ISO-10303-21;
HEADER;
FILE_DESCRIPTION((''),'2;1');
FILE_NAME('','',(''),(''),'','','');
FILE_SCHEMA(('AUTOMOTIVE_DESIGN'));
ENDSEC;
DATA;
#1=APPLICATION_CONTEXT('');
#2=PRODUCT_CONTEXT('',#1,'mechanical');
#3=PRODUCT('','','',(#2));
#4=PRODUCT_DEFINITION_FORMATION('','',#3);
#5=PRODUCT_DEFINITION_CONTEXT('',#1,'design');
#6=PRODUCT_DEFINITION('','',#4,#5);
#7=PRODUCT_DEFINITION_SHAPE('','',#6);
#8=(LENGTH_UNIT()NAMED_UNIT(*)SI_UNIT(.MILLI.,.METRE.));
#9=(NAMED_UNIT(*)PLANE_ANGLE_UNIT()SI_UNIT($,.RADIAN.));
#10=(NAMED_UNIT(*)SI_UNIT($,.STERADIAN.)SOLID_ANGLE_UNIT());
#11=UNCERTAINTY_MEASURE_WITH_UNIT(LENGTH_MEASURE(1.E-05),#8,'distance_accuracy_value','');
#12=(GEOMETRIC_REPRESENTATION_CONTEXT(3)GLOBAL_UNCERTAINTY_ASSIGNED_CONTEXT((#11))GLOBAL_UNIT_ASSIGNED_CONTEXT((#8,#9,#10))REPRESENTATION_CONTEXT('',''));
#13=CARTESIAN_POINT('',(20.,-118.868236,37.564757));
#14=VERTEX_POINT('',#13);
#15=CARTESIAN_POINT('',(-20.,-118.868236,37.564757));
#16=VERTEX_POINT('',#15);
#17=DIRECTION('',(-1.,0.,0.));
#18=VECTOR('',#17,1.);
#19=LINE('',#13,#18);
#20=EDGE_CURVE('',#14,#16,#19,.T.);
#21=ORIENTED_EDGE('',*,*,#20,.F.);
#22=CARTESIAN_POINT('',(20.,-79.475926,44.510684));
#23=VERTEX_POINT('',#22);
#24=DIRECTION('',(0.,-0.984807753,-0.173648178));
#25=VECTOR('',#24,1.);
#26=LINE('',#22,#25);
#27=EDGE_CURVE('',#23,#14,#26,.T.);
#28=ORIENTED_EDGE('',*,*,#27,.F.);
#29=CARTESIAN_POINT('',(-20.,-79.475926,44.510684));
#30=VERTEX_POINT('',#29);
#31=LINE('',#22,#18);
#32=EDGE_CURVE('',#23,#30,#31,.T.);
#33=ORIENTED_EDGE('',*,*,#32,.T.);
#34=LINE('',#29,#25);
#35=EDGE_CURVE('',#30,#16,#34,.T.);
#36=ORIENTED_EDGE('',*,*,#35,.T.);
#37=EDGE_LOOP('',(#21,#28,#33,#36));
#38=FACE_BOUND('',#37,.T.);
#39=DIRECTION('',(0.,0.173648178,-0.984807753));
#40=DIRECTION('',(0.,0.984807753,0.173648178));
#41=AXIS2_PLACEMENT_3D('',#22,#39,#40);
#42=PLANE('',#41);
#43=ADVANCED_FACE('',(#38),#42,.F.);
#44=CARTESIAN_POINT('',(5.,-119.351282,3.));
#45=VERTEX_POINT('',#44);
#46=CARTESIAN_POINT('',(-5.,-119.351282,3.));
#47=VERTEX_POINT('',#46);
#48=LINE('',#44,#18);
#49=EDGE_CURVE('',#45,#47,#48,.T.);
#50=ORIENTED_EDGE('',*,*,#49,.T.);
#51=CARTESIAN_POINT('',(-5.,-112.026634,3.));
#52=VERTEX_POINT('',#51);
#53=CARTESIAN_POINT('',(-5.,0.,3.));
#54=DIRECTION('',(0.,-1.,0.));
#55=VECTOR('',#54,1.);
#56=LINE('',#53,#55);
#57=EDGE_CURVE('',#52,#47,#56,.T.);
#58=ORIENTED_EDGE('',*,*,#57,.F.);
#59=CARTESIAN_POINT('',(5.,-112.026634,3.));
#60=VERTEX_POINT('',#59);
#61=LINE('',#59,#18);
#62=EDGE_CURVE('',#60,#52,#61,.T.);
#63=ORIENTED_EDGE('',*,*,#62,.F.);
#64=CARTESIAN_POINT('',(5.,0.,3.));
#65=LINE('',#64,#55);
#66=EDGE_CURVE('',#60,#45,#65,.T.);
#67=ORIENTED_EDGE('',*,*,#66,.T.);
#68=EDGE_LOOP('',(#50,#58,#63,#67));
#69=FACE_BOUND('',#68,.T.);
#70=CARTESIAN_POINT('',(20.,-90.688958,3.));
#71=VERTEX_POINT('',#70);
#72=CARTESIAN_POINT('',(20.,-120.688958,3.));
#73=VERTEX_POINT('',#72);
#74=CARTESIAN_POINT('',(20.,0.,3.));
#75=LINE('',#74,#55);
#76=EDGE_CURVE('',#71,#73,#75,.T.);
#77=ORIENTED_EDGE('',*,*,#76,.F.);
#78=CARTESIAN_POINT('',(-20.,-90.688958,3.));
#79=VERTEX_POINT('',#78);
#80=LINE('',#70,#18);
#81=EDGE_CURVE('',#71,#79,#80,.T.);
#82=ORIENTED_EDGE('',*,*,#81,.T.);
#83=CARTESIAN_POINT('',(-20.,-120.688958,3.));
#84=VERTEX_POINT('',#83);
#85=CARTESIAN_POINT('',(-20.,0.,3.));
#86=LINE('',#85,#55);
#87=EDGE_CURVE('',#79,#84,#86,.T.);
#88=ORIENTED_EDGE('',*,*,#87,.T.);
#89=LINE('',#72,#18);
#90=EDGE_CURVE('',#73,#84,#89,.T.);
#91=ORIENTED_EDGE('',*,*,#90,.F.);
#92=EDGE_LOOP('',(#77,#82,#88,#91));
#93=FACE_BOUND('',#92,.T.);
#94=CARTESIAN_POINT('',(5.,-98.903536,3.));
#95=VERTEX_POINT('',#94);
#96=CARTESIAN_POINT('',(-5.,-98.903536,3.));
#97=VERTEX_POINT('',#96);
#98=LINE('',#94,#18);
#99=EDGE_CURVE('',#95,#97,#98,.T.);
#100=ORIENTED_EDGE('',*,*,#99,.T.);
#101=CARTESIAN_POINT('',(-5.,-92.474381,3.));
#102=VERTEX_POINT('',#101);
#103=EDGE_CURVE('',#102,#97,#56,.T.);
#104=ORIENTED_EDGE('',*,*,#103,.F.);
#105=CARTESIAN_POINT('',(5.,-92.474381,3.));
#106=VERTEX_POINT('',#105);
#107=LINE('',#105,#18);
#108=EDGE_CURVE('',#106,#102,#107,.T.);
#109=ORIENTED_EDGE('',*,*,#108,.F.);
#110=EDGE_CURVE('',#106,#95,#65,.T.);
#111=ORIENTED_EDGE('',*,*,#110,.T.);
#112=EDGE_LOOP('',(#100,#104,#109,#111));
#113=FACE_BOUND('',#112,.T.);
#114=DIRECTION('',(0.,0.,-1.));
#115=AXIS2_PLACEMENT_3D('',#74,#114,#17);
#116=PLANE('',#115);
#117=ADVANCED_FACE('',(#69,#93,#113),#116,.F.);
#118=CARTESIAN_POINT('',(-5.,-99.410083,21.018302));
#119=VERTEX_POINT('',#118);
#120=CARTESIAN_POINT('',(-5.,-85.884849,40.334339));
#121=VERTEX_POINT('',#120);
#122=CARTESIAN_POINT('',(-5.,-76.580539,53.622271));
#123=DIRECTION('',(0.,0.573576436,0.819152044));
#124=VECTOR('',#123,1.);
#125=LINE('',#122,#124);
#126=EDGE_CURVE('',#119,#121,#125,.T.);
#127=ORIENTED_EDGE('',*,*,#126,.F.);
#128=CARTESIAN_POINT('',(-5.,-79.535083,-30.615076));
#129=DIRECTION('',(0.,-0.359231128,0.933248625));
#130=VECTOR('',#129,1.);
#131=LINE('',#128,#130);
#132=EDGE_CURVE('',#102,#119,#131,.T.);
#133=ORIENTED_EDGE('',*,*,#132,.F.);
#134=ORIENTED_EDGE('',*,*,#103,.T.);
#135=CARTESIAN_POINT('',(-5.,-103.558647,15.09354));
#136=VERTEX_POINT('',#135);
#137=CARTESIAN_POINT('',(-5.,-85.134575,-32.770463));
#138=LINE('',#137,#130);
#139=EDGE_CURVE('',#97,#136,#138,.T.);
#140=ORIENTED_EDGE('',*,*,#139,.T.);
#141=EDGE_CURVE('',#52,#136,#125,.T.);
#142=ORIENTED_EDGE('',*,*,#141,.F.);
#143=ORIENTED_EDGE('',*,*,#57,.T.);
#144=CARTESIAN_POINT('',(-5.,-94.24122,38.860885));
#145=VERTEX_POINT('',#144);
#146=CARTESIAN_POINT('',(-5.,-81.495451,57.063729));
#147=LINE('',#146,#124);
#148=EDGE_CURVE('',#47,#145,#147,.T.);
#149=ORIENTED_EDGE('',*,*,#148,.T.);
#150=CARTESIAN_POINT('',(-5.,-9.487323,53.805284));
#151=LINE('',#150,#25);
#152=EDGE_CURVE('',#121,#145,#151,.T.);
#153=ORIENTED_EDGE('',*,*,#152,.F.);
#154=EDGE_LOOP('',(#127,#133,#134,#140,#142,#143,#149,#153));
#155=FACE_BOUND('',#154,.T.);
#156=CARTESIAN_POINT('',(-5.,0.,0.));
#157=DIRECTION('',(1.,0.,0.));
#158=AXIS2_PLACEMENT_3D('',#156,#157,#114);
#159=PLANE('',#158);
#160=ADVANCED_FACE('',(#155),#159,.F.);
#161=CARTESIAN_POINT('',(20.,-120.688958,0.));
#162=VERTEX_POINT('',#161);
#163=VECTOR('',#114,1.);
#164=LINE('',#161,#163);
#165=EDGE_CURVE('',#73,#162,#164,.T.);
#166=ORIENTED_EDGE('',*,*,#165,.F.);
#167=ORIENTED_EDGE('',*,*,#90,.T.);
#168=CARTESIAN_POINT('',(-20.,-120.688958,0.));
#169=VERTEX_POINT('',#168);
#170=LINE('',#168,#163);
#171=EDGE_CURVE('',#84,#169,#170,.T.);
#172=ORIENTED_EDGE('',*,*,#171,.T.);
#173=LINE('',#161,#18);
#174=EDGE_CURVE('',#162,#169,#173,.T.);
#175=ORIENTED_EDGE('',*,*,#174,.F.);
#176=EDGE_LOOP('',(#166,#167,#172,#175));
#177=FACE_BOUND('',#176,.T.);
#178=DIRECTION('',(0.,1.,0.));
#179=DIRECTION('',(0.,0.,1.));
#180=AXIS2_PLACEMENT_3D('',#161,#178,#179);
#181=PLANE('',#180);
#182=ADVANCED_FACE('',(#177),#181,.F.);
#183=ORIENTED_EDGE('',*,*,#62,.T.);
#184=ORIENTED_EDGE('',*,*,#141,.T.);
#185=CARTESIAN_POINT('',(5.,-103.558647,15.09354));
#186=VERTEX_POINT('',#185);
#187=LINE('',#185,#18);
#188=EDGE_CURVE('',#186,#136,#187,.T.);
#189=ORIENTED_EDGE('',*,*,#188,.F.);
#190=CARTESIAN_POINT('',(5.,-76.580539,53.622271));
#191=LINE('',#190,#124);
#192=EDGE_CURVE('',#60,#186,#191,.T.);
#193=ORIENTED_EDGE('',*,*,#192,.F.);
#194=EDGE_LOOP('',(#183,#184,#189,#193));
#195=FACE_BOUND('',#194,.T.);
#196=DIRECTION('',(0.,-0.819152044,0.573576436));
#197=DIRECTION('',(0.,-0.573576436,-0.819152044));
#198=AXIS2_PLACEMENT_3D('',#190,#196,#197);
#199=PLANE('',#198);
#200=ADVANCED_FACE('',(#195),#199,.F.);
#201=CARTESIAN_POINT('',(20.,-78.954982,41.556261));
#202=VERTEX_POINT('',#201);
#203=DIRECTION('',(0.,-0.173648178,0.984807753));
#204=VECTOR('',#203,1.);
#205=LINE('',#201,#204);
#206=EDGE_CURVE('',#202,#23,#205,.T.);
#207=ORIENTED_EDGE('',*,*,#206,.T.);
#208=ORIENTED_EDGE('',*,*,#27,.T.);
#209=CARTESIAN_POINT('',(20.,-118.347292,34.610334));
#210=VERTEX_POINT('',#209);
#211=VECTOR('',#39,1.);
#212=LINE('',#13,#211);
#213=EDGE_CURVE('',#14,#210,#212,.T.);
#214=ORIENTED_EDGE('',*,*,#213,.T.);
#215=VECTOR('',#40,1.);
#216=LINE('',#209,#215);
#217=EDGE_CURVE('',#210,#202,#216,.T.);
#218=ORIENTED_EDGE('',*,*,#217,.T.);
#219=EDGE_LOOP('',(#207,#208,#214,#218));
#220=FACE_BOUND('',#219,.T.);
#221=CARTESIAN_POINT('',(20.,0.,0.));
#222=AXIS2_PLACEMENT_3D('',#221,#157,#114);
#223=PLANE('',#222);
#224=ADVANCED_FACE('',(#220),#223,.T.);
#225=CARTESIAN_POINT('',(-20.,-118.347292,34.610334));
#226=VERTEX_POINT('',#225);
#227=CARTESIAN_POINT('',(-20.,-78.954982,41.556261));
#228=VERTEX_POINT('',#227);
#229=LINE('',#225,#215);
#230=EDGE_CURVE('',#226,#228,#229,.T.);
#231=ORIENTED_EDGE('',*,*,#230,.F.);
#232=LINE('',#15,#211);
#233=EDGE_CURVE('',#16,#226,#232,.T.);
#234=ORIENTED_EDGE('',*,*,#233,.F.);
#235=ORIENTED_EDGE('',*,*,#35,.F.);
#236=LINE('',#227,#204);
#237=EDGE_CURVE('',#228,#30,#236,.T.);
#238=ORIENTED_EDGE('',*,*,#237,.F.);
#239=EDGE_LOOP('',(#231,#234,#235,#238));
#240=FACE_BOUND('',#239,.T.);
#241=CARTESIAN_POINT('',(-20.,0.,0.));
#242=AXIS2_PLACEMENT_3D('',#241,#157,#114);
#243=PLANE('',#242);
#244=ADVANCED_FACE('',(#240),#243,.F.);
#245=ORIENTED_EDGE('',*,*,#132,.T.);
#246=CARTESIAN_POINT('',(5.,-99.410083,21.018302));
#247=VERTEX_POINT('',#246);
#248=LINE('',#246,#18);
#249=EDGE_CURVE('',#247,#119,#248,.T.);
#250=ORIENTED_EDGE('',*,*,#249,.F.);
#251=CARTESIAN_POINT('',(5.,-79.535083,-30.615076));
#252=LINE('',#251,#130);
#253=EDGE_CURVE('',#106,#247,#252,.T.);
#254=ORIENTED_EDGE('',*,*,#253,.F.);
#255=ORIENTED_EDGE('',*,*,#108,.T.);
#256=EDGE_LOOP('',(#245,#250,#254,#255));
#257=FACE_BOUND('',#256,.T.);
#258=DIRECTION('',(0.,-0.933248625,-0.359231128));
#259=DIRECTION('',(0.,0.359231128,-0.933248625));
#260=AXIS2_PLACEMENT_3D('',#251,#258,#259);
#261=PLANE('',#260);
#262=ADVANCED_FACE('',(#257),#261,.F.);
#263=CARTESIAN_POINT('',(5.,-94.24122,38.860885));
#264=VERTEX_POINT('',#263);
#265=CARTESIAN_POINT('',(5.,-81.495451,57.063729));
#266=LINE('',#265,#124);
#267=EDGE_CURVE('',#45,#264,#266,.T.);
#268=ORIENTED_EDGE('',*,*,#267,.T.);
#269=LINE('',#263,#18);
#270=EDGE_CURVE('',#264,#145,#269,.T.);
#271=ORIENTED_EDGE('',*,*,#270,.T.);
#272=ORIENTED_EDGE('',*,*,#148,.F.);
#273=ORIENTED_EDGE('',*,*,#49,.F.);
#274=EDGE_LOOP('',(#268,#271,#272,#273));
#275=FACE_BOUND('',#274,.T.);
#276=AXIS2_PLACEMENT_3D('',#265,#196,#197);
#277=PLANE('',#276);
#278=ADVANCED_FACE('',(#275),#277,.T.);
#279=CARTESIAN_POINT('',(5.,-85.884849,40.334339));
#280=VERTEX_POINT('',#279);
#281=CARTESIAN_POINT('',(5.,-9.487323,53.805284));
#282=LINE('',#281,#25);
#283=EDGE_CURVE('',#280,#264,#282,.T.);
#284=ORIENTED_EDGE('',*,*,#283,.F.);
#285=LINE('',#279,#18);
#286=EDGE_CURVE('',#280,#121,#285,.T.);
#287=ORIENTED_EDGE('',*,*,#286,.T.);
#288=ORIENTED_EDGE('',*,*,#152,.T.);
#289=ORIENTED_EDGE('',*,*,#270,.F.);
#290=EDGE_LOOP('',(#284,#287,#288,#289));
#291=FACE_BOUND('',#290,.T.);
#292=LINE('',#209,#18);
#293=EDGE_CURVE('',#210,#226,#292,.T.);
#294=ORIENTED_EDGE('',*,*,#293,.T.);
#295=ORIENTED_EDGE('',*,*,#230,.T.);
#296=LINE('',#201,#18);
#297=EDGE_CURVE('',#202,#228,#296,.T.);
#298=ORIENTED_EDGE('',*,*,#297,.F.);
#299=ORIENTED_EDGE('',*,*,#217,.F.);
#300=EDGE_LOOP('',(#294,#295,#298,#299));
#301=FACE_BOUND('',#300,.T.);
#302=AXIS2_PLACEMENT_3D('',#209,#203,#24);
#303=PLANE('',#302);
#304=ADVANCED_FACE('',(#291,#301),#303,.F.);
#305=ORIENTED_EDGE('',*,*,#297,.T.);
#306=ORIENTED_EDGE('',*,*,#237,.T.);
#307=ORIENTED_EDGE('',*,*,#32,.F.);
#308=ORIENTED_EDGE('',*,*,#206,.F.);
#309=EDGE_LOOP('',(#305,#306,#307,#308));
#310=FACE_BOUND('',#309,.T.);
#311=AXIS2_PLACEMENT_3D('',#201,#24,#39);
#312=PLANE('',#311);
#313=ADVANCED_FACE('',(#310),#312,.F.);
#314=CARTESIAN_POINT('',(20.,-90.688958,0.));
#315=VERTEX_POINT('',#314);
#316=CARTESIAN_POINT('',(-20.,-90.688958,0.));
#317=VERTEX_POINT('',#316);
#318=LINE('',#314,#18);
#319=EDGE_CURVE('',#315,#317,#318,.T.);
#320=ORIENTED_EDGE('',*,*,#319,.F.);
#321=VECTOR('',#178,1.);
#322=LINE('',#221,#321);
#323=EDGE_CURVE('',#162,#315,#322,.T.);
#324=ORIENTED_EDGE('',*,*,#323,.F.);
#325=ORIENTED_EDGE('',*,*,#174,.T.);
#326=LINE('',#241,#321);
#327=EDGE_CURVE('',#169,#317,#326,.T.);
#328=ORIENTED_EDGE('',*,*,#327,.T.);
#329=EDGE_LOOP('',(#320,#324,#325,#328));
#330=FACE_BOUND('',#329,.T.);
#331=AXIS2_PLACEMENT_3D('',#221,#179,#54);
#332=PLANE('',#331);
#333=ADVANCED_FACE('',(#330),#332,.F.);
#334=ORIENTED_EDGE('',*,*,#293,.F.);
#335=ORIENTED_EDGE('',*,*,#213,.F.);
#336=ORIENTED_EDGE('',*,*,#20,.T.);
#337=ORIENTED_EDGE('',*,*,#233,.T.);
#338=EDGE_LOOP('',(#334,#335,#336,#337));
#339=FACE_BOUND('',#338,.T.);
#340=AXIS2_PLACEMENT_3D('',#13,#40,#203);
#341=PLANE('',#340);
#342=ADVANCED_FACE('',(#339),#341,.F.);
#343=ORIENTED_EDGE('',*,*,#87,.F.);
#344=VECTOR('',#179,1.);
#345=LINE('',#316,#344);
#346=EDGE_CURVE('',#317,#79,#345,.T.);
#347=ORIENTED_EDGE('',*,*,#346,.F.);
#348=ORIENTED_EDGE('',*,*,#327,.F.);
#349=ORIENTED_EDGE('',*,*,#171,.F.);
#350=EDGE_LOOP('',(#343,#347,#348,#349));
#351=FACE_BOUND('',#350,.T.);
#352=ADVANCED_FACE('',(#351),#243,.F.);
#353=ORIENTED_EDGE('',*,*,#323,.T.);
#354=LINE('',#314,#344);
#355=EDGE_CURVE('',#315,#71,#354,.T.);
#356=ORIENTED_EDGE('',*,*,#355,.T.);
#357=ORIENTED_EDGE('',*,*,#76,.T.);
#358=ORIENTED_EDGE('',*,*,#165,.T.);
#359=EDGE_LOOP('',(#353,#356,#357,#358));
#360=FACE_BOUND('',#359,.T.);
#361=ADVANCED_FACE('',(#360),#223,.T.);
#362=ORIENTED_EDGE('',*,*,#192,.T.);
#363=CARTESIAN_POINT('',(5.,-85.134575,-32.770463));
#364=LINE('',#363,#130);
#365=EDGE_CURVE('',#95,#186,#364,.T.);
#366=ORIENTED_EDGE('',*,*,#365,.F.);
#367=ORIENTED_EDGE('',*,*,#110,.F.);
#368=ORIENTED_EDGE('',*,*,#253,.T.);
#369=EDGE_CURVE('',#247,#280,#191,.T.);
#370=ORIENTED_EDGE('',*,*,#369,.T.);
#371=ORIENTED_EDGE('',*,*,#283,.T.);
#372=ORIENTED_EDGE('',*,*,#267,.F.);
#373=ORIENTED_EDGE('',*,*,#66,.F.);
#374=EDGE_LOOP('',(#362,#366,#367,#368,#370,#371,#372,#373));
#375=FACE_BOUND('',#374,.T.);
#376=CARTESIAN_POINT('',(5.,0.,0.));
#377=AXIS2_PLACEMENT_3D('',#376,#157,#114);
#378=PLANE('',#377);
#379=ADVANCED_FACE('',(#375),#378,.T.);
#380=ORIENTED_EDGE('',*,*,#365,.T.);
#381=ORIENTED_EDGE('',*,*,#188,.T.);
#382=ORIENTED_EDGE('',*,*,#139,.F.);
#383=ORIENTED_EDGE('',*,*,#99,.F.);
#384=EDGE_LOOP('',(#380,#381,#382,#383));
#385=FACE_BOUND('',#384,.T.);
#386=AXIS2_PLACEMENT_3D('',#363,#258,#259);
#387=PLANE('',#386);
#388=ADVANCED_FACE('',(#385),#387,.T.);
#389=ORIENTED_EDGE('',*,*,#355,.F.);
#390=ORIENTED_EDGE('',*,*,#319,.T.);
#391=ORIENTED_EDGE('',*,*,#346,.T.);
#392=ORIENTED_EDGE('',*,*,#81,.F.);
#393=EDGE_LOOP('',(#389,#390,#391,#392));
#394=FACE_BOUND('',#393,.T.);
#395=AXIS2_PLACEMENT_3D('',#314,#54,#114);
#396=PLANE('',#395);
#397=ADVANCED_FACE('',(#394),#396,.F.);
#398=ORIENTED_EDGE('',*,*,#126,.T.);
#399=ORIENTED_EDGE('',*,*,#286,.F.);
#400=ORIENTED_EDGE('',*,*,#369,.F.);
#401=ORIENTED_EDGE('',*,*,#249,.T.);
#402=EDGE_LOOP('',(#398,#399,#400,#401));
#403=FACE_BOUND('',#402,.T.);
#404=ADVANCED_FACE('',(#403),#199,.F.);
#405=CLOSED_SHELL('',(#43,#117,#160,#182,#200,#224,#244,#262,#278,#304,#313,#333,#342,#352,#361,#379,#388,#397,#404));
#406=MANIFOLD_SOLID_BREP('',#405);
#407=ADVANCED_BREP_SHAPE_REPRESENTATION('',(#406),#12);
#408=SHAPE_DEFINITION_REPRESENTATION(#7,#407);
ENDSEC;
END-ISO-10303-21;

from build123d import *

# Parameters (mm, degrees)
BOSS_EXTRUDE1_DEPTH = 5
SKETCH3_W           = 3
SKETCH3_H           = 30
BOSS_EXTRUDE2_DEPTH = 20


with BuildPart() as part:
    # Sketch2 → Boss-Extrude1 (new, symmetric)
    with BuildSketch(Plane(origin=(0, 0, 0), x_dir=(0, 0, -1), z_dir=(1, 0, 0))):
        Polygon((-3, -98.903535581), (-3, -92.474380652), (-21.018302161, -99.410083352), (-40.334338568, -85.884849051), (-38.860884921, -94.241219935), (-3, -119.351281883), (-3, -112.02663435), (-15.093539832, -103.558646596), align=None)
    extrude(amount=BOSS_EXTRUDE1_DEPTH, both=True)

    # Sketch3 → Boss-Extrude2 (add, symmetric)
    with BuildSketch(Plane(origin=(0, 0, 0), x_dir=(0, 0, -1), z_dir=(1, 0, 0))):
        with Locations((-1.5, -105.688958117)):
            Rectangle(SKETCH3_W, SKETCH3_H)
        Polygon((-34.610334059, -118.34729176), (-41.556261166, -78.95498164), (-44.510684425, -79.475926173), (-37.564757318, -118.868236293), align=None)
    extrude(amount=BOSS_EXTRUDE2_DEPTH, both=True)


solid = part.part
